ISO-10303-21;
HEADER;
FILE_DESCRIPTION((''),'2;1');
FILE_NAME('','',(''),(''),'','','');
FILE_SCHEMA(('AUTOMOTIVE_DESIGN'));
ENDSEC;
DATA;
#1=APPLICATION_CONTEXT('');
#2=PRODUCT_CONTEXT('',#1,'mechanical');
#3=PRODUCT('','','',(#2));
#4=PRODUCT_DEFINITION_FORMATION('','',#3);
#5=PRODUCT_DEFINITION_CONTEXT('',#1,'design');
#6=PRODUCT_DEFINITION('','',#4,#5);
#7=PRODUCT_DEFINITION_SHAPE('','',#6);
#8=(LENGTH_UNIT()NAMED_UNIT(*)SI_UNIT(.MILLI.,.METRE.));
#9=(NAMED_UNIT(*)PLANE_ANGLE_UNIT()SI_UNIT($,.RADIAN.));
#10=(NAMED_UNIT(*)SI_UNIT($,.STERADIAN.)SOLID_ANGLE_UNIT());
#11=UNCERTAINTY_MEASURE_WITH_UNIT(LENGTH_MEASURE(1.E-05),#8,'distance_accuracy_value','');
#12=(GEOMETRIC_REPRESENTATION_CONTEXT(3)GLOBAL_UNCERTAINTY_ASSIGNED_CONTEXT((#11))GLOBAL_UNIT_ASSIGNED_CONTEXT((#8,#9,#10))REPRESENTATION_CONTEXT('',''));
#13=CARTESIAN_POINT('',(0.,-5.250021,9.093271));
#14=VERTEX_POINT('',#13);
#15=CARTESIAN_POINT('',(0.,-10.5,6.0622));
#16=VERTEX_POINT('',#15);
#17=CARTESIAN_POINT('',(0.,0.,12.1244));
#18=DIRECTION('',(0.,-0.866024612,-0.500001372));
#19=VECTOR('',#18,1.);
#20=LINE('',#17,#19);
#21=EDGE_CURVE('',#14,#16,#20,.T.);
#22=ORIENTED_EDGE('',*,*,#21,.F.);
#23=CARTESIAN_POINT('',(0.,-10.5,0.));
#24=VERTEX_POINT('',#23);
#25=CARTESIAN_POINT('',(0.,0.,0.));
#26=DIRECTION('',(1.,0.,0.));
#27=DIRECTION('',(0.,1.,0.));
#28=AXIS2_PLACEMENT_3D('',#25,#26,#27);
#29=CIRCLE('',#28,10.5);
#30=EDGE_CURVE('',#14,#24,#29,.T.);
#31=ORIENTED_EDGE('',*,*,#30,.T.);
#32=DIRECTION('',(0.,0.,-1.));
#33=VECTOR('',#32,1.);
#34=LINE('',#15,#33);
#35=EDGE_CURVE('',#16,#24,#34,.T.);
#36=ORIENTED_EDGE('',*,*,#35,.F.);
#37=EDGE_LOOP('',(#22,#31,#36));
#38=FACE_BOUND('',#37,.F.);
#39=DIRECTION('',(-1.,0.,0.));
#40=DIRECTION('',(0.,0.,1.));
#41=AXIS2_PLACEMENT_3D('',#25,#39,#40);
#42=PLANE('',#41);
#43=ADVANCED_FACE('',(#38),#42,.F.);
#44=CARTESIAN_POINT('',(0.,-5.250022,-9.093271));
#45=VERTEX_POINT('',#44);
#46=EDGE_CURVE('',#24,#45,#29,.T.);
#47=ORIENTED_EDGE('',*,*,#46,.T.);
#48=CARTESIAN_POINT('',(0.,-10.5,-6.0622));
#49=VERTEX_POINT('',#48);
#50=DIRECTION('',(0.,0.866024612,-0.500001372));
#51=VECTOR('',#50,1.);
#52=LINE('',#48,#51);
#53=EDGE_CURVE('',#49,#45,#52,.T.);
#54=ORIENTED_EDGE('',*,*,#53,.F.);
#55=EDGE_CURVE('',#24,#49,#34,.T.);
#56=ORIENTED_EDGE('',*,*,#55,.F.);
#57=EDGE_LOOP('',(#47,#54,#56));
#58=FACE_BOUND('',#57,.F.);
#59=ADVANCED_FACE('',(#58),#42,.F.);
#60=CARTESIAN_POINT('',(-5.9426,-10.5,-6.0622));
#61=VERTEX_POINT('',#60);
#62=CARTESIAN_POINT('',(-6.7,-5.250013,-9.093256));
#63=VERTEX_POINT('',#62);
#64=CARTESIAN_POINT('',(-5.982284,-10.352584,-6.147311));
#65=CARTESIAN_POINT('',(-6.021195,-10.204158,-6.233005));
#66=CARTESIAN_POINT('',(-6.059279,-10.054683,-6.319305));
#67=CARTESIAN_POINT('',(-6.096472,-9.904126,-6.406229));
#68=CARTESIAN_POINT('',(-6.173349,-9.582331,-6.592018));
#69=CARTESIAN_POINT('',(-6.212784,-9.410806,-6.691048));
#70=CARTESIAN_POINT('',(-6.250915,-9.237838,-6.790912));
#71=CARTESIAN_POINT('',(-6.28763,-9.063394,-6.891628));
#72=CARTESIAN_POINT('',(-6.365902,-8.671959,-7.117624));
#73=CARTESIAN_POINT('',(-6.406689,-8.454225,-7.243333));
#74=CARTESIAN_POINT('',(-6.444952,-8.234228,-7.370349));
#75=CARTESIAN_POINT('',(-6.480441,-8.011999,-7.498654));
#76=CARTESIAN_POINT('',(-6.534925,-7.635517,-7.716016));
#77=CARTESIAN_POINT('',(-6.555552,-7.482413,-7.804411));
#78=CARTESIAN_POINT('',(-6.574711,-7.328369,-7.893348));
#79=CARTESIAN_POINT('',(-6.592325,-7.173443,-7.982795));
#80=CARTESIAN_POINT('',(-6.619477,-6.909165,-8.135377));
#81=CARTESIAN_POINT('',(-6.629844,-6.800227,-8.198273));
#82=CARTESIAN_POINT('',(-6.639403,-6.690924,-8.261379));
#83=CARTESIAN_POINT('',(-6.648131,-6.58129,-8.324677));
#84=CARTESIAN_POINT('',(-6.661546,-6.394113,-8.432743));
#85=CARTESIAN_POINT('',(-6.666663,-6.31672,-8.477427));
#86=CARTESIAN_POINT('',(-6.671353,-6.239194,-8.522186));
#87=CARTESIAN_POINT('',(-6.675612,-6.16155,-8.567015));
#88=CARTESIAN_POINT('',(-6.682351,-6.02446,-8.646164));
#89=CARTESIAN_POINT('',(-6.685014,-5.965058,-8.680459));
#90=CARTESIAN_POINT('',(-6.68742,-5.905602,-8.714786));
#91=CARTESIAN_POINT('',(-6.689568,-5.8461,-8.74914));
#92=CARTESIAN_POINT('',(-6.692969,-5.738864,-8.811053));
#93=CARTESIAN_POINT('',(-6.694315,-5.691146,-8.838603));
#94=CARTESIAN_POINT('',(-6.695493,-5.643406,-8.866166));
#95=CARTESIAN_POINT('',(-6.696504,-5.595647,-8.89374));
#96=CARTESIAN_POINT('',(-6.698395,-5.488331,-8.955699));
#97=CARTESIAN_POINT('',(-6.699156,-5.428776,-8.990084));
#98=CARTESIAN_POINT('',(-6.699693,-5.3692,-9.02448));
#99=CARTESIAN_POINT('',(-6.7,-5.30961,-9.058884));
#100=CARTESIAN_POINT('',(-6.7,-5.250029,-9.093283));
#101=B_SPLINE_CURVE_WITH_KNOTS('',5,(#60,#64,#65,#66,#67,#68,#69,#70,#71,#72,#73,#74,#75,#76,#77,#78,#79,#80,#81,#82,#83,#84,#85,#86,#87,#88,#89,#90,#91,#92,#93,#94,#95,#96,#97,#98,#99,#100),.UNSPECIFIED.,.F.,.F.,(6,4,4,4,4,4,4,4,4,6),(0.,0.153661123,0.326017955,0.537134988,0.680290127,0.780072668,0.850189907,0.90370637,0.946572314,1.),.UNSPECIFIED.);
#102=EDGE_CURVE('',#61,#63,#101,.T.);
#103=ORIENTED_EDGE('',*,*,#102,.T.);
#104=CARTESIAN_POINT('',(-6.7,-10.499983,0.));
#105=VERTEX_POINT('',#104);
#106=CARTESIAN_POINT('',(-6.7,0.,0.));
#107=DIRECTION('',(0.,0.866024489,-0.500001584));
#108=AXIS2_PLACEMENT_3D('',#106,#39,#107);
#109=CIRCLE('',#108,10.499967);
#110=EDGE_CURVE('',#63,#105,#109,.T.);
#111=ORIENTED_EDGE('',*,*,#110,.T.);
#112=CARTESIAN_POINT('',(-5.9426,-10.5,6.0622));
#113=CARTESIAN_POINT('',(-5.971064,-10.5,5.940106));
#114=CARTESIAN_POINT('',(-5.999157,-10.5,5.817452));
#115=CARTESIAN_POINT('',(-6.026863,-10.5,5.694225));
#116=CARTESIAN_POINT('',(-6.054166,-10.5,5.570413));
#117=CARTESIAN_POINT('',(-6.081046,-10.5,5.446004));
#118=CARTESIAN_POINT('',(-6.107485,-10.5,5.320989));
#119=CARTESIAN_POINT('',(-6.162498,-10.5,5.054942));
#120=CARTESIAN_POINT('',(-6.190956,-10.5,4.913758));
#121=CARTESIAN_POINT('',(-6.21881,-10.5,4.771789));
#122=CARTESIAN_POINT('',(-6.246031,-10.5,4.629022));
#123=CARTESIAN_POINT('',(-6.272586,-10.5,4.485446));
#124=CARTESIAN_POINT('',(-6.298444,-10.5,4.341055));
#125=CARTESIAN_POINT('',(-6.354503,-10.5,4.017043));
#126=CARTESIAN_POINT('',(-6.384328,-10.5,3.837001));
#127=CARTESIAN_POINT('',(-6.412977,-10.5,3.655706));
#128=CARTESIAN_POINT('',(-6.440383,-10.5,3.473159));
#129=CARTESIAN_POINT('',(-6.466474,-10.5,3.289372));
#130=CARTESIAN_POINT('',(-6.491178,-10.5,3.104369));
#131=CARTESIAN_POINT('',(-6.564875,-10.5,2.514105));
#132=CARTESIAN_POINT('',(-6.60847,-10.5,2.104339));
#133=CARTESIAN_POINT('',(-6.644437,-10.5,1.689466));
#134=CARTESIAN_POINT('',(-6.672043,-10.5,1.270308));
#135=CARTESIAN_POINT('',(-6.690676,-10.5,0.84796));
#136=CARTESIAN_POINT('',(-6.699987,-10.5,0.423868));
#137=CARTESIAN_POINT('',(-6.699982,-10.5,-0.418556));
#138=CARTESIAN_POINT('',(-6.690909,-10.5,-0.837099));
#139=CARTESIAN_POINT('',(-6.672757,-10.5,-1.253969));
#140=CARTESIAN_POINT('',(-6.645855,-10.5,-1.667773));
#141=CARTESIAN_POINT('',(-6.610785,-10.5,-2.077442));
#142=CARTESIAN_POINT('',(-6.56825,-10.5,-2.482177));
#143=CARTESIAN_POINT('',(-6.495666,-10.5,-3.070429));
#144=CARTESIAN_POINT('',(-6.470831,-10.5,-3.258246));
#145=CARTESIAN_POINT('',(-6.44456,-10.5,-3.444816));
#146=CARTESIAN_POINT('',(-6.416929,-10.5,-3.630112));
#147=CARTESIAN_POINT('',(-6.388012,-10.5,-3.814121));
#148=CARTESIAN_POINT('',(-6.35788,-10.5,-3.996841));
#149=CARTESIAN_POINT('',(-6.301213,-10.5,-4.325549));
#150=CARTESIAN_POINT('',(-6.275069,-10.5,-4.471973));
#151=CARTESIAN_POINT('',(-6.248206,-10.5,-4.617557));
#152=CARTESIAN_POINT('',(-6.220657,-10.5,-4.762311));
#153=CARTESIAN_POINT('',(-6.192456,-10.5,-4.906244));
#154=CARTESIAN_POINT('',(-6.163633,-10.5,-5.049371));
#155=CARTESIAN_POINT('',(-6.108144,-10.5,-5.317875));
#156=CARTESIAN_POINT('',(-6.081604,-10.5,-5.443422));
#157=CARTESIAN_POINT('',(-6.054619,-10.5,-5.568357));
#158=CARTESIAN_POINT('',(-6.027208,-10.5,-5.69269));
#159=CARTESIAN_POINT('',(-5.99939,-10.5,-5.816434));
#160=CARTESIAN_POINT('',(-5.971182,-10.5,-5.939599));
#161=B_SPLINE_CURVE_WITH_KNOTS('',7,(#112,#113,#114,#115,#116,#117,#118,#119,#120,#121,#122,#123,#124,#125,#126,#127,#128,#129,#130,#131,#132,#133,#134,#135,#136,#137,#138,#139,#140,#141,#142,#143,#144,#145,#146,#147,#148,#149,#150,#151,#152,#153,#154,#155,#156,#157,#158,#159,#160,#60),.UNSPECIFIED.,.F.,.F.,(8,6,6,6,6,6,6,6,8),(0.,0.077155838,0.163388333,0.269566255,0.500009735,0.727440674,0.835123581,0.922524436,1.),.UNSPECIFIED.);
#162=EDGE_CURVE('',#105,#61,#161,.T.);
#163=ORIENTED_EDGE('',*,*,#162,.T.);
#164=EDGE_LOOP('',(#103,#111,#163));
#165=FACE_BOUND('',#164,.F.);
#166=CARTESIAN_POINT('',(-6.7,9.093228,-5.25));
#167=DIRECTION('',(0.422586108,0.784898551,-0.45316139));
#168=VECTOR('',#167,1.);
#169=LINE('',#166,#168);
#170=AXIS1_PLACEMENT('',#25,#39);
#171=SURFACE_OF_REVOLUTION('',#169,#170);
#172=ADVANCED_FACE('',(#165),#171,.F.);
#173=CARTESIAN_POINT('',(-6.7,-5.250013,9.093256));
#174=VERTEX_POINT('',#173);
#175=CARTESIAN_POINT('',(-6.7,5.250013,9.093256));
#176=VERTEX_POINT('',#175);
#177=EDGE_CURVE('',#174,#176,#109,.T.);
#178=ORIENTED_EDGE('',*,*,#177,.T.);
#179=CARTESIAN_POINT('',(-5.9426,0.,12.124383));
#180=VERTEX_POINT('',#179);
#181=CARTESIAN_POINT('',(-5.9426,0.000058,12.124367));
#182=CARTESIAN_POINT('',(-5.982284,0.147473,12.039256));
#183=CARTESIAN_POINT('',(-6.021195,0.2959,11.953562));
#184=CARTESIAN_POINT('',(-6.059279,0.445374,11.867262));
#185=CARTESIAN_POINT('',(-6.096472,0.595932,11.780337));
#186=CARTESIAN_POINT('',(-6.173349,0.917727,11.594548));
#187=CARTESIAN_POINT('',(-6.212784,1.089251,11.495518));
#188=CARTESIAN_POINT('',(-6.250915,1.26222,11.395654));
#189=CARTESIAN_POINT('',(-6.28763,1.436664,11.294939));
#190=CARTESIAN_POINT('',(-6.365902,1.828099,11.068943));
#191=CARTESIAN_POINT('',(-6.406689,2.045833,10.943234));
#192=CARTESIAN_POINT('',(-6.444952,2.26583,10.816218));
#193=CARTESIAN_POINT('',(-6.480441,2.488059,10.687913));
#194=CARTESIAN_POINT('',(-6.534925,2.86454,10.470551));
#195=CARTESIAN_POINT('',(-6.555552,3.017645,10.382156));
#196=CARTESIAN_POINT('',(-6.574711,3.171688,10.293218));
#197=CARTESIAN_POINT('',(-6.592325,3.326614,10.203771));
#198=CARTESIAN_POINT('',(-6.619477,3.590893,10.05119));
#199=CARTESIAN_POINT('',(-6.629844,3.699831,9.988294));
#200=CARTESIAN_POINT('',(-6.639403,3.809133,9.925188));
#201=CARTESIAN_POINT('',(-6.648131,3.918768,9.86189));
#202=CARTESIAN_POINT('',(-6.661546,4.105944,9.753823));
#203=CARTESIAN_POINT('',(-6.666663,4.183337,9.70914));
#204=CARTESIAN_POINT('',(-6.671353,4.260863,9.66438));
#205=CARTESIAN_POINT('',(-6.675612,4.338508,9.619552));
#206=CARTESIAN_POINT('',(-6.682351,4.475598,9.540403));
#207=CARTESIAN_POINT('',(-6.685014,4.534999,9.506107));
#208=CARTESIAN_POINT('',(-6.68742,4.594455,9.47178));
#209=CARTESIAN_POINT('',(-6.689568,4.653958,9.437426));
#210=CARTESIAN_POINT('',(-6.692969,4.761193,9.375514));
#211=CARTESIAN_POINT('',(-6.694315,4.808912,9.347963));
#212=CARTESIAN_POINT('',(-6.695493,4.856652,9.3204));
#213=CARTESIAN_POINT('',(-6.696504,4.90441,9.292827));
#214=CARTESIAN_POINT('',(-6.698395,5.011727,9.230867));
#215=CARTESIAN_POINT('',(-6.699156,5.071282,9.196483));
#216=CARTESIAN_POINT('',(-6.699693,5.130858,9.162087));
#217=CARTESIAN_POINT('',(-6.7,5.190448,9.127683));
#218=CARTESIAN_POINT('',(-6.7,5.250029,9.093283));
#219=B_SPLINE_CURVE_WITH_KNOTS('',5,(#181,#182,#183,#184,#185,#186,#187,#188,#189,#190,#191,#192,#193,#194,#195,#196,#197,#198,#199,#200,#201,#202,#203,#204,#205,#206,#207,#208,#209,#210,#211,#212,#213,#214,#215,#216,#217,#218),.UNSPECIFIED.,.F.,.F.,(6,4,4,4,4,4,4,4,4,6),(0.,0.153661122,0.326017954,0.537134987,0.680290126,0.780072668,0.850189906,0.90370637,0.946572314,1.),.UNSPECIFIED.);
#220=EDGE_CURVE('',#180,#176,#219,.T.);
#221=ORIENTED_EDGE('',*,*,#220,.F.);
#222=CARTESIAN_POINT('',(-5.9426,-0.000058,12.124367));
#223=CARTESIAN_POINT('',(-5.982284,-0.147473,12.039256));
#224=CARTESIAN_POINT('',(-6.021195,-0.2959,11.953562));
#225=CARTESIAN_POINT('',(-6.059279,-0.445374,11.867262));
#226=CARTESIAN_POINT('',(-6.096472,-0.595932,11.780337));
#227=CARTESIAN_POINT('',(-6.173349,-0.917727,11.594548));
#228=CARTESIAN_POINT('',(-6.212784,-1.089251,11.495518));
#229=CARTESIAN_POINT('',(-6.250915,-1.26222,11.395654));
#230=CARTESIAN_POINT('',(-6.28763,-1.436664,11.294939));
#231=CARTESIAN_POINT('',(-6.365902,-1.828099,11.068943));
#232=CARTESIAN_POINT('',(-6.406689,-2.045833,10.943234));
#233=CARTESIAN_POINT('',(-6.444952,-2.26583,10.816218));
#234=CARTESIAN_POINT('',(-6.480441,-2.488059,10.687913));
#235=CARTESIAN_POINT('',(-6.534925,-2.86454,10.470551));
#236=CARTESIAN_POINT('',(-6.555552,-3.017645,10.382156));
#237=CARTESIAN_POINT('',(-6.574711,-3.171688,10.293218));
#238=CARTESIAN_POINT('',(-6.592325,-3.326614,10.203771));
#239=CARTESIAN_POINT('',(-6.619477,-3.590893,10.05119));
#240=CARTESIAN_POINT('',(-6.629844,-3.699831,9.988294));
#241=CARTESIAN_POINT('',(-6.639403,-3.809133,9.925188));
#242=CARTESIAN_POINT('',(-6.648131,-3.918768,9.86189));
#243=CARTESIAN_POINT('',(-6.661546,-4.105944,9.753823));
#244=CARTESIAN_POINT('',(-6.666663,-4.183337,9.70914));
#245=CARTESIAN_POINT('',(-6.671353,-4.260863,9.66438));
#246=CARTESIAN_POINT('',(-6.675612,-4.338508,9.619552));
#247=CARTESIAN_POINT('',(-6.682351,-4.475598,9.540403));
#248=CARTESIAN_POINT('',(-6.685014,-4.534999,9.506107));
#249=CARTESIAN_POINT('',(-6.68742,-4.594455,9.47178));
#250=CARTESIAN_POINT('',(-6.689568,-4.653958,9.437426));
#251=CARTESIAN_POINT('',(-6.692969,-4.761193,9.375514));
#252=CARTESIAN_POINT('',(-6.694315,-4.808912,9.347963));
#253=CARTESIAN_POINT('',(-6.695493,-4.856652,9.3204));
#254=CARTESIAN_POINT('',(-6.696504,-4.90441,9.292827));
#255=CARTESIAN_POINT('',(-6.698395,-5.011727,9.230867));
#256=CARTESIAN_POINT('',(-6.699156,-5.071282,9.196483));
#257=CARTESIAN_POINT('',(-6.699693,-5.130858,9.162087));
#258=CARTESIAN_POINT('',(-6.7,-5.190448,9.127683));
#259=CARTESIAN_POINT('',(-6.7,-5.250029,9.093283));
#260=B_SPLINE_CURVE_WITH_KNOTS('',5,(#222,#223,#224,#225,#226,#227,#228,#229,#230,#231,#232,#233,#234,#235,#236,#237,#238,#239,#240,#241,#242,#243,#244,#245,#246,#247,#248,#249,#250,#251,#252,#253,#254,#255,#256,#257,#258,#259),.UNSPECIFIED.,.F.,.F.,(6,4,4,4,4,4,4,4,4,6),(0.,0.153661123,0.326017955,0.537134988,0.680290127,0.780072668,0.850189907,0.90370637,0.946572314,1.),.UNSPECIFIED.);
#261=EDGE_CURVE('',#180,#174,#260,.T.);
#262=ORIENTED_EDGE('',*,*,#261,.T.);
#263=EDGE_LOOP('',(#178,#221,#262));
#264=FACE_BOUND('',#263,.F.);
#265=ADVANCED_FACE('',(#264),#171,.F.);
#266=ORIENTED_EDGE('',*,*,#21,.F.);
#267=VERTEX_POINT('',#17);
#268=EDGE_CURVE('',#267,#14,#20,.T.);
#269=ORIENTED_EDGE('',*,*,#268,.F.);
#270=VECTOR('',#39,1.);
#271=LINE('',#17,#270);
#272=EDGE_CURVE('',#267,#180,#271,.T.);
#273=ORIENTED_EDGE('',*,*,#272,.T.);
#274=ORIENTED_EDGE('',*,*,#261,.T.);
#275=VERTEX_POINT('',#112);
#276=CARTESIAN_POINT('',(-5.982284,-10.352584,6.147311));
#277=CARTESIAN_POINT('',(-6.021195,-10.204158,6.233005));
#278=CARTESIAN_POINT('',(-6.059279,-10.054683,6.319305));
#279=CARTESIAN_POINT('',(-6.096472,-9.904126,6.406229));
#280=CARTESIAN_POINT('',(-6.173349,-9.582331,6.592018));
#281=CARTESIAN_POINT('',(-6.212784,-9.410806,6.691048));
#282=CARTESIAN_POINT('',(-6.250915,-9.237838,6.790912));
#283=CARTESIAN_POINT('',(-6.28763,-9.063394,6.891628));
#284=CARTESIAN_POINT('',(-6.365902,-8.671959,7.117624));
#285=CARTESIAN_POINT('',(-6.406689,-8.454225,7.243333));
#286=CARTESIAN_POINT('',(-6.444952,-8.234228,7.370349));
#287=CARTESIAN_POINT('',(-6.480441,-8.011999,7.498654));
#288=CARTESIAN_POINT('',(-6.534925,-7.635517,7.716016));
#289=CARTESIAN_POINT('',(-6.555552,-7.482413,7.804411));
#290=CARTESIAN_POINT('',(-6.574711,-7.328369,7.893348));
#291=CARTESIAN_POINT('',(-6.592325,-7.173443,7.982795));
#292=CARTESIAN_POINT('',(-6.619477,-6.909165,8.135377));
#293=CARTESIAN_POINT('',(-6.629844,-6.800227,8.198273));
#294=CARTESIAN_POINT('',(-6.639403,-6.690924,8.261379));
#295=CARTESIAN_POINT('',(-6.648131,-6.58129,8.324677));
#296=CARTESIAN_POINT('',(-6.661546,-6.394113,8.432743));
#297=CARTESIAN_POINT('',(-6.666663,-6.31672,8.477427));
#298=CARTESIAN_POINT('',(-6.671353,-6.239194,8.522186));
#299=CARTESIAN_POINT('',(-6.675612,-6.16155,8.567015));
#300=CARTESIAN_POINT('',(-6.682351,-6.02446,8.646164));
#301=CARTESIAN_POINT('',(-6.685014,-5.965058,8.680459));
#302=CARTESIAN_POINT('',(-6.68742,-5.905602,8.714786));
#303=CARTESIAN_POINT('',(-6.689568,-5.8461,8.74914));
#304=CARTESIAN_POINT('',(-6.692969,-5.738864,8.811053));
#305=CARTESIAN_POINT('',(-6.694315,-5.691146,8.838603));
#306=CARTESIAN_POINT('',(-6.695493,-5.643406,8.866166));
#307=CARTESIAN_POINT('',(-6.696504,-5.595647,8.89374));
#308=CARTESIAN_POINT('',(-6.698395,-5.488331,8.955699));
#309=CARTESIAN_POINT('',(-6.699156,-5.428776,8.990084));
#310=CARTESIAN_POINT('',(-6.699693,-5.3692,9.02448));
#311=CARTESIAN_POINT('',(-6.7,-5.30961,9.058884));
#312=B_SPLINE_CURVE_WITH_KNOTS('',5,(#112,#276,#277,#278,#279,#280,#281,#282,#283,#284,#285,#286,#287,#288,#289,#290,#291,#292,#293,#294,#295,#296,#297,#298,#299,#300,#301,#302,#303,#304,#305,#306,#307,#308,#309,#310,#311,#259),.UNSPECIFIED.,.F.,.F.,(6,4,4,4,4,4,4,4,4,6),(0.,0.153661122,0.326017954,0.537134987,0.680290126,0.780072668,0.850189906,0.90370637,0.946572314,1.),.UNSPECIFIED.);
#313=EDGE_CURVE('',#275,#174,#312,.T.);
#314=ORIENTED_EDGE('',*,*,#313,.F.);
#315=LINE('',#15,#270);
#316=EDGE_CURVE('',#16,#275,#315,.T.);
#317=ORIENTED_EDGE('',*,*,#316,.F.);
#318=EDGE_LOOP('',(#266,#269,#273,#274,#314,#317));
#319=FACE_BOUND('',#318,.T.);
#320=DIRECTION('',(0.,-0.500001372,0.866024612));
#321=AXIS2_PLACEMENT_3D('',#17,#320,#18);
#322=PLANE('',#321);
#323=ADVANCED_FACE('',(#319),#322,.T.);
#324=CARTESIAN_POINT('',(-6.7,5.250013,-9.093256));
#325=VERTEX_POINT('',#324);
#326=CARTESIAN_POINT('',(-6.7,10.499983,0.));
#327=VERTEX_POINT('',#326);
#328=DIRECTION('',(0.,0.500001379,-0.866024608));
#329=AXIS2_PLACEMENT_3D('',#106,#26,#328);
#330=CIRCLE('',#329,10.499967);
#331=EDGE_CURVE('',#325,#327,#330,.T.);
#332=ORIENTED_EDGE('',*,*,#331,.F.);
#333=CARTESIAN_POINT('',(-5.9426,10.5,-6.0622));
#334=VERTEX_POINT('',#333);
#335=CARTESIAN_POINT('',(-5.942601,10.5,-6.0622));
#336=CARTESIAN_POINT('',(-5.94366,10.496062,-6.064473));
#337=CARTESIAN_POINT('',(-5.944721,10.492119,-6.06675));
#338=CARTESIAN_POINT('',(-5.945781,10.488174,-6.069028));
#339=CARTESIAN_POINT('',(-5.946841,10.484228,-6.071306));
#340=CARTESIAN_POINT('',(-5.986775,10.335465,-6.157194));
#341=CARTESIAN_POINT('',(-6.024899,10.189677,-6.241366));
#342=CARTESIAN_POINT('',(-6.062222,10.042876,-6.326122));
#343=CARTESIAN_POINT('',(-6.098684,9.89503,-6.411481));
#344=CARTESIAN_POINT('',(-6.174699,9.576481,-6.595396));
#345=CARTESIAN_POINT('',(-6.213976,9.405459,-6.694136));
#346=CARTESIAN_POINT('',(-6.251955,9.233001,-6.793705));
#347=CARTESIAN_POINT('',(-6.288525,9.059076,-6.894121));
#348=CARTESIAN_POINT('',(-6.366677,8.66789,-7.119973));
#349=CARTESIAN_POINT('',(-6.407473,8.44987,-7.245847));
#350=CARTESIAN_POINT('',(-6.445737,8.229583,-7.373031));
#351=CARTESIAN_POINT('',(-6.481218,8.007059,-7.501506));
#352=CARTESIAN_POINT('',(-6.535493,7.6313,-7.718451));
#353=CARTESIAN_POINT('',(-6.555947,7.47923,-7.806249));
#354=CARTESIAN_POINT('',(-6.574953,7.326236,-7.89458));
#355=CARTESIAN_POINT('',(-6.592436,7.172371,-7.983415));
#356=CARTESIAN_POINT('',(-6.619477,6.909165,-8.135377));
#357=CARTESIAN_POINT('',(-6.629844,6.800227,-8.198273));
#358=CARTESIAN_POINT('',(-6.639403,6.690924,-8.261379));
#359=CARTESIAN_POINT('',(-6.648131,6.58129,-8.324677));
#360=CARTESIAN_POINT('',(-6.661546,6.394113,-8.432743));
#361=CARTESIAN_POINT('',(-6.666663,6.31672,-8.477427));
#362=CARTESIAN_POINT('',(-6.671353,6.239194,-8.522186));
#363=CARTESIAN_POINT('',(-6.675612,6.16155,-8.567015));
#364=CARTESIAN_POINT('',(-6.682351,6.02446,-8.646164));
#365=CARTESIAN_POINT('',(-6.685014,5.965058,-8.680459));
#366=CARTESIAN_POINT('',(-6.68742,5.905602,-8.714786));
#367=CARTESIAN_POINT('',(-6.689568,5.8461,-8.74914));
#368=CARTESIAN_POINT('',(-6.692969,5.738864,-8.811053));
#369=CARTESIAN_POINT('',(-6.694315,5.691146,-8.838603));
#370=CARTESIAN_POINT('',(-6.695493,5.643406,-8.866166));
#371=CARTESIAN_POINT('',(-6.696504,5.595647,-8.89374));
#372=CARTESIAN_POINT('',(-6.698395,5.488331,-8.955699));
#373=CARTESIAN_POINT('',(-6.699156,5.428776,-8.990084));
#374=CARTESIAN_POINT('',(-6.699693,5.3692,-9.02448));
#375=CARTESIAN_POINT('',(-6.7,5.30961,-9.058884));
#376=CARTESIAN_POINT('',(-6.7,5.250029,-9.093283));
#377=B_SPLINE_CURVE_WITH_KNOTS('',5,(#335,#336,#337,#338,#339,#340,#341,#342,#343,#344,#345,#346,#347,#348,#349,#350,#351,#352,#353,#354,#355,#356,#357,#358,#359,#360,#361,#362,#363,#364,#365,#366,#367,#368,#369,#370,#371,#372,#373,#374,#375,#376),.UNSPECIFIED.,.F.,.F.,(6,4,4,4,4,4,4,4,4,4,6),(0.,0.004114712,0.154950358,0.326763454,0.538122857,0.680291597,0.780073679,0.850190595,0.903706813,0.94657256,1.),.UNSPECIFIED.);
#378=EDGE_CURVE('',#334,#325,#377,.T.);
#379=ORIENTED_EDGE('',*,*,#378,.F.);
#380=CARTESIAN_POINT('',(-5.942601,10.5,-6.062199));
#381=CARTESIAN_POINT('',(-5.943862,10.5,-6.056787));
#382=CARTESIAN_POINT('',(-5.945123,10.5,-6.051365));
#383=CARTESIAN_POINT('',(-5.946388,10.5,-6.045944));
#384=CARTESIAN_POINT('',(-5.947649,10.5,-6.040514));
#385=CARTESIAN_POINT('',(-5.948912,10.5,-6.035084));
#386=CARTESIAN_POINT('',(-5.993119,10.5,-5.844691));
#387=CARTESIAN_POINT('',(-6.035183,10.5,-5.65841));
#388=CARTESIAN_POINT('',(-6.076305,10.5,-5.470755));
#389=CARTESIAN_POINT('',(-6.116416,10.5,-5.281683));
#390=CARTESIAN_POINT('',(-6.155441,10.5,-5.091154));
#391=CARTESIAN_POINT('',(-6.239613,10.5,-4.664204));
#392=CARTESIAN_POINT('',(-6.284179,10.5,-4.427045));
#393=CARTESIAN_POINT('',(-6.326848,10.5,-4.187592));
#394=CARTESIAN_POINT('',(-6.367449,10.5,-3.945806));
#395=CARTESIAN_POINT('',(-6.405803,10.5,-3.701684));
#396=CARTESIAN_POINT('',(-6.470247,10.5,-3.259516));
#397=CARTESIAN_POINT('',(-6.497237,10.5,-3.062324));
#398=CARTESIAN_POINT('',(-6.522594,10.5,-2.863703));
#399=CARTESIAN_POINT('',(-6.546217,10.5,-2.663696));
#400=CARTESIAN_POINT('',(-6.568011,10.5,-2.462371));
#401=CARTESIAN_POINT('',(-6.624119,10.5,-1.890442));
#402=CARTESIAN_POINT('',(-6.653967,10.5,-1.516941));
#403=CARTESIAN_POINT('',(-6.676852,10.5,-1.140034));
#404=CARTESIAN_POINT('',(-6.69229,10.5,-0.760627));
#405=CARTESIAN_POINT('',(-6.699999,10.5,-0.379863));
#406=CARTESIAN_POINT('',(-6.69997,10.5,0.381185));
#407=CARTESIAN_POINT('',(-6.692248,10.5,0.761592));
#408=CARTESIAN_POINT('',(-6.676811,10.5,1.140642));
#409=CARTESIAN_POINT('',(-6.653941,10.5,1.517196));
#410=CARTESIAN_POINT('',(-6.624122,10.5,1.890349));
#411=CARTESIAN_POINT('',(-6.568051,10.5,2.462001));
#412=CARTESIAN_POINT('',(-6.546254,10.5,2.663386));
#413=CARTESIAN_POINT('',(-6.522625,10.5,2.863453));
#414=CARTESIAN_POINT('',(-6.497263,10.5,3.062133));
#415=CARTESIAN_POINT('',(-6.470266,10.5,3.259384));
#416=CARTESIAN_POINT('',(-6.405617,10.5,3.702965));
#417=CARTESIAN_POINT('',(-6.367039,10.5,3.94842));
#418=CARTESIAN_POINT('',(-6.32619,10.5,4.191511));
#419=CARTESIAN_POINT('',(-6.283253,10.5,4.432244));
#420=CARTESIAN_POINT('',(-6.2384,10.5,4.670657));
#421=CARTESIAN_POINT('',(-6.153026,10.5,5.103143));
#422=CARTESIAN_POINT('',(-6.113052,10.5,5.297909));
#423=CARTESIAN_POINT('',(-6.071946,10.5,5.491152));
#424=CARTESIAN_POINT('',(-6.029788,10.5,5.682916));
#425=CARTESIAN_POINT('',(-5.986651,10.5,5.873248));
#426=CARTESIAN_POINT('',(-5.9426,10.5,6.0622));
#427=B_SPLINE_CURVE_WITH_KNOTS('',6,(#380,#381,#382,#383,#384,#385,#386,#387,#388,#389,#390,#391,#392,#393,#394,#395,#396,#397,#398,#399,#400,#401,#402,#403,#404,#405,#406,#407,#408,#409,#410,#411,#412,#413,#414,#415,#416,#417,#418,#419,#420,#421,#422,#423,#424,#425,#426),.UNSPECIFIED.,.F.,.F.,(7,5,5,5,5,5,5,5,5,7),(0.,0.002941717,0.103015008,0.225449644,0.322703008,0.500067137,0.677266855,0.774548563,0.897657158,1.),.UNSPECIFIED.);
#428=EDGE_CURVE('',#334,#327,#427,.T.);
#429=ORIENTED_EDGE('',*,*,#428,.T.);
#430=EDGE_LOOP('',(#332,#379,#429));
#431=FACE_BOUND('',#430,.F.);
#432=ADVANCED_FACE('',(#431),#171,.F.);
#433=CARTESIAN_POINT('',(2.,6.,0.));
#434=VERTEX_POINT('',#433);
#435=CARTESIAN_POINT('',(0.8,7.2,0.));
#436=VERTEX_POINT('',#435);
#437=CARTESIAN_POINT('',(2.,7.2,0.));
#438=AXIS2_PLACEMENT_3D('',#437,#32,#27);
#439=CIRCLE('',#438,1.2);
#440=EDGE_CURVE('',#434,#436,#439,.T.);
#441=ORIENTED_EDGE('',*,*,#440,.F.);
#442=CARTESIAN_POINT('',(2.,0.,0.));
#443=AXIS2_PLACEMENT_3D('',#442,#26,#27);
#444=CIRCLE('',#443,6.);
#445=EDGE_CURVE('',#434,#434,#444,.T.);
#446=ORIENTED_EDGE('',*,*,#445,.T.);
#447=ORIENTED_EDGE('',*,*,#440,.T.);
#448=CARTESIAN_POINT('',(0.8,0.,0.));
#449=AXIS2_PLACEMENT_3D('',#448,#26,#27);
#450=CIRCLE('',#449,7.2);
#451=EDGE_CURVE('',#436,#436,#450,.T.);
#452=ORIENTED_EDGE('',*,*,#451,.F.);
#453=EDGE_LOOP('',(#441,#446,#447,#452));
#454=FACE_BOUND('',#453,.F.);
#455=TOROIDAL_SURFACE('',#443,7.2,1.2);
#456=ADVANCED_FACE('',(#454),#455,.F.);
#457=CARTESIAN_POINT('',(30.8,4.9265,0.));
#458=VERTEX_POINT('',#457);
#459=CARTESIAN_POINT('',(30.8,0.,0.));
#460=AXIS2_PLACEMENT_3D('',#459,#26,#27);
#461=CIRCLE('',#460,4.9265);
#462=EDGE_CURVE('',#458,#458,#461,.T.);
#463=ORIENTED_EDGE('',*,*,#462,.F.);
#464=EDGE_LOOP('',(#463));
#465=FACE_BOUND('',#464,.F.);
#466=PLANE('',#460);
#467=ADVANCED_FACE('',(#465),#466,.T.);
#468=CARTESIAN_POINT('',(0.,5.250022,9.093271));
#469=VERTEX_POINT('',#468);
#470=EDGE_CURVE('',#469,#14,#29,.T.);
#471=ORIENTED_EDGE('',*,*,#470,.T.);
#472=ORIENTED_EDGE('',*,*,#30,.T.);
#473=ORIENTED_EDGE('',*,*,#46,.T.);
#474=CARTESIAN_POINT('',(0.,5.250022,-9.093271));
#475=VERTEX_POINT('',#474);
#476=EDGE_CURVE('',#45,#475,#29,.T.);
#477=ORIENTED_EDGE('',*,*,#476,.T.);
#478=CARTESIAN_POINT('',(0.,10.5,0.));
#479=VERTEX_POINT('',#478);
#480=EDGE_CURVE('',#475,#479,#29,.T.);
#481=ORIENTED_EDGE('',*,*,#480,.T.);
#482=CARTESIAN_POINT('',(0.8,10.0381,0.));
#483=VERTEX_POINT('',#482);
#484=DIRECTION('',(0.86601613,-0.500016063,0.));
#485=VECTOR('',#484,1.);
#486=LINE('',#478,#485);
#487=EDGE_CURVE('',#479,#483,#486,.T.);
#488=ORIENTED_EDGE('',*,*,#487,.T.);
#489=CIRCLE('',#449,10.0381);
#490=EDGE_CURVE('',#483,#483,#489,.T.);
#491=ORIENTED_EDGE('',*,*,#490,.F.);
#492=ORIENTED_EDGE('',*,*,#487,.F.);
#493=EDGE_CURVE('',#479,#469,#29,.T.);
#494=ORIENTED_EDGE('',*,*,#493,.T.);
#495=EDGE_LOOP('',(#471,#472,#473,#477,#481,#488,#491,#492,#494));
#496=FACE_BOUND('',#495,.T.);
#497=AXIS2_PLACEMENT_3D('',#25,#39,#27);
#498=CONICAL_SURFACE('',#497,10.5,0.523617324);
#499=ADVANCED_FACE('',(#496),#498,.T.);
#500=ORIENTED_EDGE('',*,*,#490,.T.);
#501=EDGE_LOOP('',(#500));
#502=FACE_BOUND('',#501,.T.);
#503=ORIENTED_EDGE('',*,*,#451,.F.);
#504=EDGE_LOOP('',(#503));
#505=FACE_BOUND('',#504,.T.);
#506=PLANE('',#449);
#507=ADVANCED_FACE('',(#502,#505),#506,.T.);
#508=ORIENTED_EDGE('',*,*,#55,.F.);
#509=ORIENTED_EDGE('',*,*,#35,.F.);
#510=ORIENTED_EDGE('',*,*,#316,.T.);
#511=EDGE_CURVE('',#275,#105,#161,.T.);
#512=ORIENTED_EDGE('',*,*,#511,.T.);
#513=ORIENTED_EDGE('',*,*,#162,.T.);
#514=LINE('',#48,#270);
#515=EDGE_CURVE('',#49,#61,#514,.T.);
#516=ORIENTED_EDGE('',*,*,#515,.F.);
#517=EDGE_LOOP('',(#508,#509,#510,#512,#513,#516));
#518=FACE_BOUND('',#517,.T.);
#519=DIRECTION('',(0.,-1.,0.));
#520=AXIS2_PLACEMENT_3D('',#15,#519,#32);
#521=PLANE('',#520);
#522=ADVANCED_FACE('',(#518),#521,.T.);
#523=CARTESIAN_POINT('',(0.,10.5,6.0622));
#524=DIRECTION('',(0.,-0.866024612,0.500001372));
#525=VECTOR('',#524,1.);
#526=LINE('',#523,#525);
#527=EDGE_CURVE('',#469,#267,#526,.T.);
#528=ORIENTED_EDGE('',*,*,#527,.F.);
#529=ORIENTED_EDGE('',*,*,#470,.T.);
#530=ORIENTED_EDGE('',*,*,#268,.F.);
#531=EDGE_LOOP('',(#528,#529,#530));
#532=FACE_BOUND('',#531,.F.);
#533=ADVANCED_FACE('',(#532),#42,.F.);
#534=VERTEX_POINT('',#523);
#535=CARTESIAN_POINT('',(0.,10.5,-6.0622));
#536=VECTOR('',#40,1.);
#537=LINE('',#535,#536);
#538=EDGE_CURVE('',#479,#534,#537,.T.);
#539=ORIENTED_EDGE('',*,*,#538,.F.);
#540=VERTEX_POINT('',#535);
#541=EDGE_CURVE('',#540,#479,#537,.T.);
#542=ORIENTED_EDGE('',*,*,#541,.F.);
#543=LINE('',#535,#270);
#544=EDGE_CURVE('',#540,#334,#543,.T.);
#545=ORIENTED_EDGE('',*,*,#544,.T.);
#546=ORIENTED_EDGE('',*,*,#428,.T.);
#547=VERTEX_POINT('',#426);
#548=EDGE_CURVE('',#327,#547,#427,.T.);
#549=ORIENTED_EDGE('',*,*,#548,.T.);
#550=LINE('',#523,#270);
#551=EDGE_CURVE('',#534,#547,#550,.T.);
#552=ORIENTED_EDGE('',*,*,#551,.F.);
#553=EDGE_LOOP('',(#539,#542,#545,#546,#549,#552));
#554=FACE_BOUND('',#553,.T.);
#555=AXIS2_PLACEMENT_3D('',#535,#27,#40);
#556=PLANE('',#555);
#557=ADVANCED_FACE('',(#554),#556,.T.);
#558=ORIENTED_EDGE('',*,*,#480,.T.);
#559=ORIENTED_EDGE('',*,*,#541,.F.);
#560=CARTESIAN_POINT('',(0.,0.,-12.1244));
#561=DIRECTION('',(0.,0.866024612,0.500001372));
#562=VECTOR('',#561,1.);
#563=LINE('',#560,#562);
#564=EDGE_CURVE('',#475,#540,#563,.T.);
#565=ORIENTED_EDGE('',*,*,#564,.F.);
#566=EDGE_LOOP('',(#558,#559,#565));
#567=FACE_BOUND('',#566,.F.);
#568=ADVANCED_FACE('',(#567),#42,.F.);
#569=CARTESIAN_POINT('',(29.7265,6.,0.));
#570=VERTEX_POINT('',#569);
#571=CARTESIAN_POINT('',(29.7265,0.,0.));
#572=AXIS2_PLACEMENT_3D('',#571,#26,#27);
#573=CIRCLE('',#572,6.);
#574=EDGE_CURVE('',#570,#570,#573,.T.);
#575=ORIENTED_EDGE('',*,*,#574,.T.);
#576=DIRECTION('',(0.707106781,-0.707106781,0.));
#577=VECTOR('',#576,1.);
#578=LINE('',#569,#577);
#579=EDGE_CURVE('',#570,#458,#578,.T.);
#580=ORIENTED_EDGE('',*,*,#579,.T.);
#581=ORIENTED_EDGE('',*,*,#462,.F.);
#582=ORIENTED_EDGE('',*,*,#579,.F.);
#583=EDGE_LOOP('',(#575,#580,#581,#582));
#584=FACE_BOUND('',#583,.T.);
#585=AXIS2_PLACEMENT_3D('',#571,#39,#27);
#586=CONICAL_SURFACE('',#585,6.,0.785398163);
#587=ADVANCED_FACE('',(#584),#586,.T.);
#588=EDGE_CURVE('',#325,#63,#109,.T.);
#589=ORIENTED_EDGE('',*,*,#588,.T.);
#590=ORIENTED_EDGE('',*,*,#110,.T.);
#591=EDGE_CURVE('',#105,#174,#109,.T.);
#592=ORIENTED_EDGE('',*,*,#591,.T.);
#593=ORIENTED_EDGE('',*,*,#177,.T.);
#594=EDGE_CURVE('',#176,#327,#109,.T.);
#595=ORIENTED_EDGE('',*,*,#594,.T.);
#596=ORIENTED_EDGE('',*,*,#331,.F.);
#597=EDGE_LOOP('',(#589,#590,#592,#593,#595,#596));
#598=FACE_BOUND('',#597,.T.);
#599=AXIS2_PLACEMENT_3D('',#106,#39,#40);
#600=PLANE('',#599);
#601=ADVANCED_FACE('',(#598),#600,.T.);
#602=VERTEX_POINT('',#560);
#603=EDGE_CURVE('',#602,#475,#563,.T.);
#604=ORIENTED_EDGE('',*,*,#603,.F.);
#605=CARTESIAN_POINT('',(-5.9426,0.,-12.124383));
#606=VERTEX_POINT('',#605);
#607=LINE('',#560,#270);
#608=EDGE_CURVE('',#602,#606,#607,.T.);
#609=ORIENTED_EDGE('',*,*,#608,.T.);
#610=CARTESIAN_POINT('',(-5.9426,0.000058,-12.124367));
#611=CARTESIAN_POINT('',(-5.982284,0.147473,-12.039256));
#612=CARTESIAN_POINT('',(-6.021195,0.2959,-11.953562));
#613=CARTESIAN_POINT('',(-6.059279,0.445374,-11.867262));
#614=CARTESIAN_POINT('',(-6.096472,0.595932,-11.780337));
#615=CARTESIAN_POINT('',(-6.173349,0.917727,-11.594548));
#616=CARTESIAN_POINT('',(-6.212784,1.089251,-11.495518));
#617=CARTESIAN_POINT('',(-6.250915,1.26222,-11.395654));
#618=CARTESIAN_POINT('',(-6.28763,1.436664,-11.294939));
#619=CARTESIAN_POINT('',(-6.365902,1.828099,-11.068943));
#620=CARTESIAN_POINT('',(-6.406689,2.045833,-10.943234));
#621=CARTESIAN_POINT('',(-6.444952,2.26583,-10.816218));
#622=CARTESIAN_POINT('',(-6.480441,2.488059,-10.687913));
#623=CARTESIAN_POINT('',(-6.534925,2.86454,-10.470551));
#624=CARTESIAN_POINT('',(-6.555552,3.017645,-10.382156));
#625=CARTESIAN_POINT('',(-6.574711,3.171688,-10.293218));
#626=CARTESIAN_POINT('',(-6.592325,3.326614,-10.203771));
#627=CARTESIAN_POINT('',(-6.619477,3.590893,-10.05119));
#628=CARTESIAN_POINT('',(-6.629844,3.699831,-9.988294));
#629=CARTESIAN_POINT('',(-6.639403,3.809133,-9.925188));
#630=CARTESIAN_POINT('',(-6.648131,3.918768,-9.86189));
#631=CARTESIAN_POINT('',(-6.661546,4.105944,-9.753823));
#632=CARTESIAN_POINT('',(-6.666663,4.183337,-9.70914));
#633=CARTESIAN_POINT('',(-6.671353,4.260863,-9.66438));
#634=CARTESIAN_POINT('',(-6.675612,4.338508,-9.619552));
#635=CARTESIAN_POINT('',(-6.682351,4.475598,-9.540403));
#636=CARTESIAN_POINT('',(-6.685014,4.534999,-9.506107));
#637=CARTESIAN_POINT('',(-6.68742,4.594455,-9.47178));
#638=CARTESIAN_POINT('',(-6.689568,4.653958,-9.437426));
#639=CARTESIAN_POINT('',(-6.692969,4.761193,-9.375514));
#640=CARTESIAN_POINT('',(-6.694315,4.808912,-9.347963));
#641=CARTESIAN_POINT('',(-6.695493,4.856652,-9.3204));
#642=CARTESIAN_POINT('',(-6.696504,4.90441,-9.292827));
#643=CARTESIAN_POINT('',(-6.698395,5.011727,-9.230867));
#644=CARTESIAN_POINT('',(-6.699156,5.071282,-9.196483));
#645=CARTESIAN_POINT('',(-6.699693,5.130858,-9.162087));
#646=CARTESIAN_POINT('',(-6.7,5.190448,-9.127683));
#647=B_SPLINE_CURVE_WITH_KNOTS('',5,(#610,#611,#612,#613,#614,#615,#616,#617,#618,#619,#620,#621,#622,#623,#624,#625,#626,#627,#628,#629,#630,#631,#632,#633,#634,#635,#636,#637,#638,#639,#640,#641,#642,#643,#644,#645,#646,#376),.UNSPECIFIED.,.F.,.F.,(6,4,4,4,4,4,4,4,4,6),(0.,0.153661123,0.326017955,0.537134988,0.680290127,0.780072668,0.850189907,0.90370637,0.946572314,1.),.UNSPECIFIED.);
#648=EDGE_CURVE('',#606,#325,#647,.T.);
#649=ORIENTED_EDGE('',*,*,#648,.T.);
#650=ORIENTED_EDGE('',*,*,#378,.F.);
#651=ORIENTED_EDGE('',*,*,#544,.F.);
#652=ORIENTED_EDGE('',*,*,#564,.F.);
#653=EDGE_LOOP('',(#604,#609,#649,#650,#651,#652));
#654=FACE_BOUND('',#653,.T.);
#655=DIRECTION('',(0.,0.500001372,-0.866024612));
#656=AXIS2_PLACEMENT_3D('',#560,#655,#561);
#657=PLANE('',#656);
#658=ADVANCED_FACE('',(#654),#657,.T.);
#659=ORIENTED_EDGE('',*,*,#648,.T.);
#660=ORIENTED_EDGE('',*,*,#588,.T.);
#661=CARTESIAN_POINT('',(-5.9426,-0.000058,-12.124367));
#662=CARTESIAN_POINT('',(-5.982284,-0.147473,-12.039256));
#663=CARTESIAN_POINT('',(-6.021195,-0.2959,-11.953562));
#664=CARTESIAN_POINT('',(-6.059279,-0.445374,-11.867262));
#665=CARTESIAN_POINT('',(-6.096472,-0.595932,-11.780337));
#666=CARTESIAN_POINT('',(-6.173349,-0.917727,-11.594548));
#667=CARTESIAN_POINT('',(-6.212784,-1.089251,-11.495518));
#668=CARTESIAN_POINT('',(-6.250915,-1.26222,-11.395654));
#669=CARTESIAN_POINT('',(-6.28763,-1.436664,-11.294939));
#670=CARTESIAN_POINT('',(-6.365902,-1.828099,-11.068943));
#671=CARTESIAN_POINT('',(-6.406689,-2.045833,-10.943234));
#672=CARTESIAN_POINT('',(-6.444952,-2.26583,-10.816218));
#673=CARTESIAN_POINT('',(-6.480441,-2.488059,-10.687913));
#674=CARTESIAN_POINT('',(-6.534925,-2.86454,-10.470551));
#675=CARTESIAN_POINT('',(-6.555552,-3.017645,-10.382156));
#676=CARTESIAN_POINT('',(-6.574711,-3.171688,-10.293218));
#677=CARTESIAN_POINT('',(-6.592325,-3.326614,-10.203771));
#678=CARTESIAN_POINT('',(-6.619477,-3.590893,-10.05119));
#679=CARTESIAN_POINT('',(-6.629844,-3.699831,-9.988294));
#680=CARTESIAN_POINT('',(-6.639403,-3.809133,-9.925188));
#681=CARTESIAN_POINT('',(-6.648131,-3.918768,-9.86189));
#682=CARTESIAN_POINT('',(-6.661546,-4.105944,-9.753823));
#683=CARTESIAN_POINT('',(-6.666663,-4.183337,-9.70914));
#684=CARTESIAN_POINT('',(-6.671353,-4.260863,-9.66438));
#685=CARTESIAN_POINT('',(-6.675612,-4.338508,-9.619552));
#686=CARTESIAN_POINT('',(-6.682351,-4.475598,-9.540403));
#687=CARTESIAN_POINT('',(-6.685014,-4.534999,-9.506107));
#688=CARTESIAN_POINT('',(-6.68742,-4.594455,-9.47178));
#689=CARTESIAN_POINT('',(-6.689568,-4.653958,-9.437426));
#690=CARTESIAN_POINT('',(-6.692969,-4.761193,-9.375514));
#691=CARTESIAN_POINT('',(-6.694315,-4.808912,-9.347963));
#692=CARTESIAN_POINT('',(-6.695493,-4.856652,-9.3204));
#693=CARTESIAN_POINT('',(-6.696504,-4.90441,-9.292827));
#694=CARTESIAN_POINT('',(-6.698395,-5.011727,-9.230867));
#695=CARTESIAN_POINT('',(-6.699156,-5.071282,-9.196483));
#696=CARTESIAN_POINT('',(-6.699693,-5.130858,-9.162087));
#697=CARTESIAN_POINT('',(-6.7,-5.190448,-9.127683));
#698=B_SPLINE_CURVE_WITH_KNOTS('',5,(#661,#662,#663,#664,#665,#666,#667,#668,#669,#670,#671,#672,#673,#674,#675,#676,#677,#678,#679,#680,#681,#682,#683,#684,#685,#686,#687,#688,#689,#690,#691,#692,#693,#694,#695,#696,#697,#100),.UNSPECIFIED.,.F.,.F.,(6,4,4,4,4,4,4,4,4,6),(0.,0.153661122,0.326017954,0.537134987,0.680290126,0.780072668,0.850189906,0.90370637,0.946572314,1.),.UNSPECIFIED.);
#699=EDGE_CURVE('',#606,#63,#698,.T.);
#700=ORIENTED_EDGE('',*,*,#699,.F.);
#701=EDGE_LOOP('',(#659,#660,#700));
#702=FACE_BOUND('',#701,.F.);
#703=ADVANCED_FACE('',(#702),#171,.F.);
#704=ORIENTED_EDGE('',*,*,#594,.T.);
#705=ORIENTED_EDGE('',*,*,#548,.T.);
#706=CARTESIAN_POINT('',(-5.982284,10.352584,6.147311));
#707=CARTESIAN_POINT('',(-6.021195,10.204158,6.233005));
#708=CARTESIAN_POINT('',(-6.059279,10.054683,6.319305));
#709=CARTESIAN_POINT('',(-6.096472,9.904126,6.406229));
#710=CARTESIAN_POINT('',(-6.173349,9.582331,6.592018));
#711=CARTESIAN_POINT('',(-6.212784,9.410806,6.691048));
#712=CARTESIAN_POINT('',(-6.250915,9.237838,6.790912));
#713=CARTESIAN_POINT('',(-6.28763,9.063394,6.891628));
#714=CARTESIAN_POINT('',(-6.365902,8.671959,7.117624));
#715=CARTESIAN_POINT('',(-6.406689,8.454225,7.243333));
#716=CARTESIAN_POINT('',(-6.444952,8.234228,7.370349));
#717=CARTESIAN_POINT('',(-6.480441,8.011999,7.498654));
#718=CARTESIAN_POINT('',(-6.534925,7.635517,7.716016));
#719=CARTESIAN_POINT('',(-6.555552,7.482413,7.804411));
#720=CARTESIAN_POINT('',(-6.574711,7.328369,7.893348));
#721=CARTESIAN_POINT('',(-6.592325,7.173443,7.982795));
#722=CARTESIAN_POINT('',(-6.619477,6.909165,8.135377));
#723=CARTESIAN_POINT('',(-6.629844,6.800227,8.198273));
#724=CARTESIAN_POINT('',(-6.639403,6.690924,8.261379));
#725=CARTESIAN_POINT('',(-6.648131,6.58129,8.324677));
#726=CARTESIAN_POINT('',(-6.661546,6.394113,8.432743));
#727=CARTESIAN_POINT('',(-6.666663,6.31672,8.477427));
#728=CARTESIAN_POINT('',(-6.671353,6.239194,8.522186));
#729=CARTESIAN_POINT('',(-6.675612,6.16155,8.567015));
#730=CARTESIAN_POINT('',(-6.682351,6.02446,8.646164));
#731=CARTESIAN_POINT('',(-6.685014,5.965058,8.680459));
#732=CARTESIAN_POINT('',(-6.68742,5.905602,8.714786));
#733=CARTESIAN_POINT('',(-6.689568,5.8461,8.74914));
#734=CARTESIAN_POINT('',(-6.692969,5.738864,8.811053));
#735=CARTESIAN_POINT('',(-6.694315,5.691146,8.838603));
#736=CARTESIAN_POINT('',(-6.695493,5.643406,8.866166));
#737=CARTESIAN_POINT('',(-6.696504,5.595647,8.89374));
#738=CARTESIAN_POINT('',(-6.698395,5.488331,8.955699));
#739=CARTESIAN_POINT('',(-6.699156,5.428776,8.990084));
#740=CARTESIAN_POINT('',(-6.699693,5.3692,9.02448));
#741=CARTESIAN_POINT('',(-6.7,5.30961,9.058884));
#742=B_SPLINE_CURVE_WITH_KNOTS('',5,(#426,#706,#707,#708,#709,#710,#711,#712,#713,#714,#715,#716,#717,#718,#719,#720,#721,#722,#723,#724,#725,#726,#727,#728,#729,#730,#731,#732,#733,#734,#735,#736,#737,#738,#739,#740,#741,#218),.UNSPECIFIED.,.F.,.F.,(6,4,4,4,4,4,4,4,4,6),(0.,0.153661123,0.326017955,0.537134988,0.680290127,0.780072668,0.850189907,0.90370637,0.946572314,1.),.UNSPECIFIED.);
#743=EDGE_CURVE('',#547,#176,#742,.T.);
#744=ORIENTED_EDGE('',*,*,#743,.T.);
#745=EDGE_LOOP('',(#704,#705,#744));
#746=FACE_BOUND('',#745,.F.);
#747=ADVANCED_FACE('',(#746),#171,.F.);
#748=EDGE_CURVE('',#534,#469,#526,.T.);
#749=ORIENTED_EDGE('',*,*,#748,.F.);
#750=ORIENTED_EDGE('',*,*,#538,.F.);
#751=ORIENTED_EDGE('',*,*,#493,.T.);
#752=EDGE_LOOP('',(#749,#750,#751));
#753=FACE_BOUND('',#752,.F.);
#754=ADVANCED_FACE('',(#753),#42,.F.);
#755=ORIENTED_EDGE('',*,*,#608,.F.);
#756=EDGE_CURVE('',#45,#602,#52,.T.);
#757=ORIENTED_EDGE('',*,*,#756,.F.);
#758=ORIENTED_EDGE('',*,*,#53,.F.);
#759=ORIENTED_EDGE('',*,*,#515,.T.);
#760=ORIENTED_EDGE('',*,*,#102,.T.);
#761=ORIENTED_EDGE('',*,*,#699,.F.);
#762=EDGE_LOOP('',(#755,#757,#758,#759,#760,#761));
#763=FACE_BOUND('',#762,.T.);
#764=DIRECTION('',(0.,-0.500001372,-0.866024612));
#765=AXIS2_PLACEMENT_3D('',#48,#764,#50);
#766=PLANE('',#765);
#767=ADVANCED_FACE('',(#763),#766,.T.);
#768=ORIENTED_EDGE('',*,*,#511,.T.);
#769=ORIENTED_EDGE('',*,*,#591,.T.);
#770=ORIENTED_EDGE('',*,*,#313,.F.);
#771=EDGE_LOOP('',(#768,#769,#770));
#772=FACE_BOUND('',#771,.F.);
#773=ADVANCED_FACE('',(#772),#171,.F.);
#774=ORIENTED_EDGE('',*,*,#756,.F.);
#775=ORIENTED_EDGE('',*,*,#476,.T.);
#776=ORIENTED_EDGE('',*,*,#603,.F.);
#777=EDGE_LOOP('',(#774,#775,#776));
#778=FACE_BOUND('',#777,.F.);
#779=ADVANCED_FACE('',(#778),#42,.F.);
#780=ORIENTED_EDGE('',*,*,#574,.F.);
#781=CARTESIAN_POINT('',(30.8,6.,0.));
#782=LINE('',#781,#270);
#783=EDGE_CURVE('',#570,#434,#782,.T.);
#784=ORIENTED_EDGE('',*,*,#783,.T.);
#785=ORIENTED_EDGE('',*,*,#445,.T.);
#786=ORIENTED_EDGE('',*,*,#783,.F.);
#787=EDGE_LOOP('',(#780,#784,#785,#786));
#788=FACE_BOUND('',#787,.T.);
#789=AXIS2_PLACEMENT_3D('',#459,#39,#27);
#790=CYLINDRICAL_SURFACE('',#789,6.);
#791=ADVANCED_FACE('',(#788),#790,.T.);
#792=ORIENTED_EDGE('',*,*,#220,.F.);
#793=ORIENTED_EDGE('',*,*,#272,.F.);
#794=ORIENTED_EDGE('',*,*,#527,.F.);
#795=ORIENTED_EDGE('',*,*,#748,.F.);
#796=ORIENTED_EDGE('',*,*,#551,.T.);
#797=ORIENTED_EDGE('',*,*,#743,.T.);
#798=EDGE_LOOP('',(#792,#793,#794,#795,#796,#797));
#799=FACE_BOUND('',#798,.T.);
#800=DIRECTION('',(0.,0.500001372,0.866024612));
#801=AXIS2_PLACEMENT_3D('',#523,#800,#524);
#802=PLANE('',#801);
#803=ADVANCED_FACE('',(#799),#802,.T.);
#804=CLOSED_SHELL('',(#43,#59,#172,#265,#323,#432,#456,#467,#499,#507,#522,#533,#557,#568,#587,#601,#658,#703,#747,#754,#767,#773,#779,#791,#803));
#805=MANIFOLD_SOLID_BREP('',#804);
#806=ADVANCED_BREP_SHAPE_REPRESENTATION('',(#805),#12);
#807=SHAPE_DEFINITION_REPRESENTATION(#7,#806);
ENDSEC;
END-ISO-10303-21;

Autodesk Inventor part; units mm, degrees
ref_plane "YZ Plane" through (0, 0, 0) normal (1, 0, 0) x (0, 1, 0)
ref_plane "XZ Plane" through (0, 0, 0) normal (0, 1, 0) x (-1, 0, 0)
sketch "草图4" plane through (0, 0, 0) normal (0, 0, 1) x (1, 0, 0)
  line L0 (0, 0) -> (0, 10.5)
  line L1 (0, 10.5) -> (0.8, 10.0381)
  line L2 (0.8, 10.0381) -> (0.8, 0)
  line L3 (0.8, 0) -> (0, 0)
  line L4 (0, 0) -> (10.723, 0)
  line L5 (0.8, 0) -> (30.8, 0)
  line L6 (30.8, 0) -> (30.8, 6)
  line L7 (30.8, 6) -> (0.8, 6)
  line L8 (0.8, 6) -> (0.8, 0)
  dimension "INC" = 0.8
  dimension "d22" = 60
  dimension "L" = 30
  dimension "D" = 12
  dimension "INS" = 21
revolve "Revolution3" add sketch "草图4" angle 360 about axis through (0, 0, 0) along (1, 0, 0)
sketch "草图5" plane through (0, 0, 0) normal (-1, 0, 0) x (0, 0, 1)
  line L0 (-6.0622, 10.5) -> (6.0622, 10.5)
  line L1 (6.0622, 10.5) -> (12.1244, 0)
  line L2 (12.1244, 0) -> (6.0622, -10.5)
  line L3 (6.0622, -10.5) -> (-6.0622, -10.5)
  line L4 (-6.0622, -10.5) -> (-12.1244, 0)
  line L5 (-12.1244, 0) -> (-6.0622, 10.5)
  point P0 (0, 0)
  point P1 (0, 0)
  dimension "d27" = 21
extrude "Extrusion2" add sketch "草图5" along normal blind 6.7
ref_plane "Work Plane1" through (0, 10.5, -6.0622) normal (0, 0.5, 0.8660254) x (-1, 0, 0)
sketch "草图6" plane through (0, 10.5, -6.0622) normal (0, 0.5, 0.8660254) x (-1, 0, 0)
  line L0 (0, 12.1244) -> (11.8845, 12.1244) construction
  line L1 (6.7, 6.0622) -> (6.7, 0) projected
  line L2 (0, 3.0311) -> (0, 0) projected
  line L3 (6.7, 6.0622) -> (6.7, 0) projected
  line L4 (0, 0) -> (6.7, 0) projected
  line L5 (0, 3.0311) -> (0, 0) projected
  line L6 (0, 6.0622) -> (0, 3.0311) projected
  line L7 (0, 6.0622) -> (6.7, 6.0622) projected
  line L8 (6.7, 1.6244) -> (5.9426, 0)
  dimension "d30" = 25
  dimension "d31" = 21
revolve "Revolution4" cut sketch "草图6" angle 360 about axis through (0, 0, 0) along (-1, 0, 0) contours L1 L4 L8
thread "Thread2" size "M12x1.75" designation "M12" class "6g" standard "GB Metric profile" length 30
chamfer "Chamfer2" distance 1.0735 angle 45 1 edges at (30.8, -6, 0)
fillet "Fillet1" radius 1.2 1 edges at (0.8, -6, 0)
equation "\"d27\" = INS"
equation "\"d28\" = KOH - INC"
equation "\"d33\" = NLG - LS"
equation "\"d35\" = GUL"
equation "\"L\" = NLG"
equation "\"D\" = NND"
equation "\"d31\" = INS"
equation "\"NND\" = 12"
equation "\"NLG\" = 30"
equation "\"PTC\" = 1.75"
equation "\"KOD\" = 1"
equation "\"KOH\" = 7.5"
equation "\"GUL\" = 0.61345 * PTC"
equation "\"LS\" = 0"
properties part number "Bolt GB/T 18230.2-2000 M12 x 30" material "Steel, Mild"
